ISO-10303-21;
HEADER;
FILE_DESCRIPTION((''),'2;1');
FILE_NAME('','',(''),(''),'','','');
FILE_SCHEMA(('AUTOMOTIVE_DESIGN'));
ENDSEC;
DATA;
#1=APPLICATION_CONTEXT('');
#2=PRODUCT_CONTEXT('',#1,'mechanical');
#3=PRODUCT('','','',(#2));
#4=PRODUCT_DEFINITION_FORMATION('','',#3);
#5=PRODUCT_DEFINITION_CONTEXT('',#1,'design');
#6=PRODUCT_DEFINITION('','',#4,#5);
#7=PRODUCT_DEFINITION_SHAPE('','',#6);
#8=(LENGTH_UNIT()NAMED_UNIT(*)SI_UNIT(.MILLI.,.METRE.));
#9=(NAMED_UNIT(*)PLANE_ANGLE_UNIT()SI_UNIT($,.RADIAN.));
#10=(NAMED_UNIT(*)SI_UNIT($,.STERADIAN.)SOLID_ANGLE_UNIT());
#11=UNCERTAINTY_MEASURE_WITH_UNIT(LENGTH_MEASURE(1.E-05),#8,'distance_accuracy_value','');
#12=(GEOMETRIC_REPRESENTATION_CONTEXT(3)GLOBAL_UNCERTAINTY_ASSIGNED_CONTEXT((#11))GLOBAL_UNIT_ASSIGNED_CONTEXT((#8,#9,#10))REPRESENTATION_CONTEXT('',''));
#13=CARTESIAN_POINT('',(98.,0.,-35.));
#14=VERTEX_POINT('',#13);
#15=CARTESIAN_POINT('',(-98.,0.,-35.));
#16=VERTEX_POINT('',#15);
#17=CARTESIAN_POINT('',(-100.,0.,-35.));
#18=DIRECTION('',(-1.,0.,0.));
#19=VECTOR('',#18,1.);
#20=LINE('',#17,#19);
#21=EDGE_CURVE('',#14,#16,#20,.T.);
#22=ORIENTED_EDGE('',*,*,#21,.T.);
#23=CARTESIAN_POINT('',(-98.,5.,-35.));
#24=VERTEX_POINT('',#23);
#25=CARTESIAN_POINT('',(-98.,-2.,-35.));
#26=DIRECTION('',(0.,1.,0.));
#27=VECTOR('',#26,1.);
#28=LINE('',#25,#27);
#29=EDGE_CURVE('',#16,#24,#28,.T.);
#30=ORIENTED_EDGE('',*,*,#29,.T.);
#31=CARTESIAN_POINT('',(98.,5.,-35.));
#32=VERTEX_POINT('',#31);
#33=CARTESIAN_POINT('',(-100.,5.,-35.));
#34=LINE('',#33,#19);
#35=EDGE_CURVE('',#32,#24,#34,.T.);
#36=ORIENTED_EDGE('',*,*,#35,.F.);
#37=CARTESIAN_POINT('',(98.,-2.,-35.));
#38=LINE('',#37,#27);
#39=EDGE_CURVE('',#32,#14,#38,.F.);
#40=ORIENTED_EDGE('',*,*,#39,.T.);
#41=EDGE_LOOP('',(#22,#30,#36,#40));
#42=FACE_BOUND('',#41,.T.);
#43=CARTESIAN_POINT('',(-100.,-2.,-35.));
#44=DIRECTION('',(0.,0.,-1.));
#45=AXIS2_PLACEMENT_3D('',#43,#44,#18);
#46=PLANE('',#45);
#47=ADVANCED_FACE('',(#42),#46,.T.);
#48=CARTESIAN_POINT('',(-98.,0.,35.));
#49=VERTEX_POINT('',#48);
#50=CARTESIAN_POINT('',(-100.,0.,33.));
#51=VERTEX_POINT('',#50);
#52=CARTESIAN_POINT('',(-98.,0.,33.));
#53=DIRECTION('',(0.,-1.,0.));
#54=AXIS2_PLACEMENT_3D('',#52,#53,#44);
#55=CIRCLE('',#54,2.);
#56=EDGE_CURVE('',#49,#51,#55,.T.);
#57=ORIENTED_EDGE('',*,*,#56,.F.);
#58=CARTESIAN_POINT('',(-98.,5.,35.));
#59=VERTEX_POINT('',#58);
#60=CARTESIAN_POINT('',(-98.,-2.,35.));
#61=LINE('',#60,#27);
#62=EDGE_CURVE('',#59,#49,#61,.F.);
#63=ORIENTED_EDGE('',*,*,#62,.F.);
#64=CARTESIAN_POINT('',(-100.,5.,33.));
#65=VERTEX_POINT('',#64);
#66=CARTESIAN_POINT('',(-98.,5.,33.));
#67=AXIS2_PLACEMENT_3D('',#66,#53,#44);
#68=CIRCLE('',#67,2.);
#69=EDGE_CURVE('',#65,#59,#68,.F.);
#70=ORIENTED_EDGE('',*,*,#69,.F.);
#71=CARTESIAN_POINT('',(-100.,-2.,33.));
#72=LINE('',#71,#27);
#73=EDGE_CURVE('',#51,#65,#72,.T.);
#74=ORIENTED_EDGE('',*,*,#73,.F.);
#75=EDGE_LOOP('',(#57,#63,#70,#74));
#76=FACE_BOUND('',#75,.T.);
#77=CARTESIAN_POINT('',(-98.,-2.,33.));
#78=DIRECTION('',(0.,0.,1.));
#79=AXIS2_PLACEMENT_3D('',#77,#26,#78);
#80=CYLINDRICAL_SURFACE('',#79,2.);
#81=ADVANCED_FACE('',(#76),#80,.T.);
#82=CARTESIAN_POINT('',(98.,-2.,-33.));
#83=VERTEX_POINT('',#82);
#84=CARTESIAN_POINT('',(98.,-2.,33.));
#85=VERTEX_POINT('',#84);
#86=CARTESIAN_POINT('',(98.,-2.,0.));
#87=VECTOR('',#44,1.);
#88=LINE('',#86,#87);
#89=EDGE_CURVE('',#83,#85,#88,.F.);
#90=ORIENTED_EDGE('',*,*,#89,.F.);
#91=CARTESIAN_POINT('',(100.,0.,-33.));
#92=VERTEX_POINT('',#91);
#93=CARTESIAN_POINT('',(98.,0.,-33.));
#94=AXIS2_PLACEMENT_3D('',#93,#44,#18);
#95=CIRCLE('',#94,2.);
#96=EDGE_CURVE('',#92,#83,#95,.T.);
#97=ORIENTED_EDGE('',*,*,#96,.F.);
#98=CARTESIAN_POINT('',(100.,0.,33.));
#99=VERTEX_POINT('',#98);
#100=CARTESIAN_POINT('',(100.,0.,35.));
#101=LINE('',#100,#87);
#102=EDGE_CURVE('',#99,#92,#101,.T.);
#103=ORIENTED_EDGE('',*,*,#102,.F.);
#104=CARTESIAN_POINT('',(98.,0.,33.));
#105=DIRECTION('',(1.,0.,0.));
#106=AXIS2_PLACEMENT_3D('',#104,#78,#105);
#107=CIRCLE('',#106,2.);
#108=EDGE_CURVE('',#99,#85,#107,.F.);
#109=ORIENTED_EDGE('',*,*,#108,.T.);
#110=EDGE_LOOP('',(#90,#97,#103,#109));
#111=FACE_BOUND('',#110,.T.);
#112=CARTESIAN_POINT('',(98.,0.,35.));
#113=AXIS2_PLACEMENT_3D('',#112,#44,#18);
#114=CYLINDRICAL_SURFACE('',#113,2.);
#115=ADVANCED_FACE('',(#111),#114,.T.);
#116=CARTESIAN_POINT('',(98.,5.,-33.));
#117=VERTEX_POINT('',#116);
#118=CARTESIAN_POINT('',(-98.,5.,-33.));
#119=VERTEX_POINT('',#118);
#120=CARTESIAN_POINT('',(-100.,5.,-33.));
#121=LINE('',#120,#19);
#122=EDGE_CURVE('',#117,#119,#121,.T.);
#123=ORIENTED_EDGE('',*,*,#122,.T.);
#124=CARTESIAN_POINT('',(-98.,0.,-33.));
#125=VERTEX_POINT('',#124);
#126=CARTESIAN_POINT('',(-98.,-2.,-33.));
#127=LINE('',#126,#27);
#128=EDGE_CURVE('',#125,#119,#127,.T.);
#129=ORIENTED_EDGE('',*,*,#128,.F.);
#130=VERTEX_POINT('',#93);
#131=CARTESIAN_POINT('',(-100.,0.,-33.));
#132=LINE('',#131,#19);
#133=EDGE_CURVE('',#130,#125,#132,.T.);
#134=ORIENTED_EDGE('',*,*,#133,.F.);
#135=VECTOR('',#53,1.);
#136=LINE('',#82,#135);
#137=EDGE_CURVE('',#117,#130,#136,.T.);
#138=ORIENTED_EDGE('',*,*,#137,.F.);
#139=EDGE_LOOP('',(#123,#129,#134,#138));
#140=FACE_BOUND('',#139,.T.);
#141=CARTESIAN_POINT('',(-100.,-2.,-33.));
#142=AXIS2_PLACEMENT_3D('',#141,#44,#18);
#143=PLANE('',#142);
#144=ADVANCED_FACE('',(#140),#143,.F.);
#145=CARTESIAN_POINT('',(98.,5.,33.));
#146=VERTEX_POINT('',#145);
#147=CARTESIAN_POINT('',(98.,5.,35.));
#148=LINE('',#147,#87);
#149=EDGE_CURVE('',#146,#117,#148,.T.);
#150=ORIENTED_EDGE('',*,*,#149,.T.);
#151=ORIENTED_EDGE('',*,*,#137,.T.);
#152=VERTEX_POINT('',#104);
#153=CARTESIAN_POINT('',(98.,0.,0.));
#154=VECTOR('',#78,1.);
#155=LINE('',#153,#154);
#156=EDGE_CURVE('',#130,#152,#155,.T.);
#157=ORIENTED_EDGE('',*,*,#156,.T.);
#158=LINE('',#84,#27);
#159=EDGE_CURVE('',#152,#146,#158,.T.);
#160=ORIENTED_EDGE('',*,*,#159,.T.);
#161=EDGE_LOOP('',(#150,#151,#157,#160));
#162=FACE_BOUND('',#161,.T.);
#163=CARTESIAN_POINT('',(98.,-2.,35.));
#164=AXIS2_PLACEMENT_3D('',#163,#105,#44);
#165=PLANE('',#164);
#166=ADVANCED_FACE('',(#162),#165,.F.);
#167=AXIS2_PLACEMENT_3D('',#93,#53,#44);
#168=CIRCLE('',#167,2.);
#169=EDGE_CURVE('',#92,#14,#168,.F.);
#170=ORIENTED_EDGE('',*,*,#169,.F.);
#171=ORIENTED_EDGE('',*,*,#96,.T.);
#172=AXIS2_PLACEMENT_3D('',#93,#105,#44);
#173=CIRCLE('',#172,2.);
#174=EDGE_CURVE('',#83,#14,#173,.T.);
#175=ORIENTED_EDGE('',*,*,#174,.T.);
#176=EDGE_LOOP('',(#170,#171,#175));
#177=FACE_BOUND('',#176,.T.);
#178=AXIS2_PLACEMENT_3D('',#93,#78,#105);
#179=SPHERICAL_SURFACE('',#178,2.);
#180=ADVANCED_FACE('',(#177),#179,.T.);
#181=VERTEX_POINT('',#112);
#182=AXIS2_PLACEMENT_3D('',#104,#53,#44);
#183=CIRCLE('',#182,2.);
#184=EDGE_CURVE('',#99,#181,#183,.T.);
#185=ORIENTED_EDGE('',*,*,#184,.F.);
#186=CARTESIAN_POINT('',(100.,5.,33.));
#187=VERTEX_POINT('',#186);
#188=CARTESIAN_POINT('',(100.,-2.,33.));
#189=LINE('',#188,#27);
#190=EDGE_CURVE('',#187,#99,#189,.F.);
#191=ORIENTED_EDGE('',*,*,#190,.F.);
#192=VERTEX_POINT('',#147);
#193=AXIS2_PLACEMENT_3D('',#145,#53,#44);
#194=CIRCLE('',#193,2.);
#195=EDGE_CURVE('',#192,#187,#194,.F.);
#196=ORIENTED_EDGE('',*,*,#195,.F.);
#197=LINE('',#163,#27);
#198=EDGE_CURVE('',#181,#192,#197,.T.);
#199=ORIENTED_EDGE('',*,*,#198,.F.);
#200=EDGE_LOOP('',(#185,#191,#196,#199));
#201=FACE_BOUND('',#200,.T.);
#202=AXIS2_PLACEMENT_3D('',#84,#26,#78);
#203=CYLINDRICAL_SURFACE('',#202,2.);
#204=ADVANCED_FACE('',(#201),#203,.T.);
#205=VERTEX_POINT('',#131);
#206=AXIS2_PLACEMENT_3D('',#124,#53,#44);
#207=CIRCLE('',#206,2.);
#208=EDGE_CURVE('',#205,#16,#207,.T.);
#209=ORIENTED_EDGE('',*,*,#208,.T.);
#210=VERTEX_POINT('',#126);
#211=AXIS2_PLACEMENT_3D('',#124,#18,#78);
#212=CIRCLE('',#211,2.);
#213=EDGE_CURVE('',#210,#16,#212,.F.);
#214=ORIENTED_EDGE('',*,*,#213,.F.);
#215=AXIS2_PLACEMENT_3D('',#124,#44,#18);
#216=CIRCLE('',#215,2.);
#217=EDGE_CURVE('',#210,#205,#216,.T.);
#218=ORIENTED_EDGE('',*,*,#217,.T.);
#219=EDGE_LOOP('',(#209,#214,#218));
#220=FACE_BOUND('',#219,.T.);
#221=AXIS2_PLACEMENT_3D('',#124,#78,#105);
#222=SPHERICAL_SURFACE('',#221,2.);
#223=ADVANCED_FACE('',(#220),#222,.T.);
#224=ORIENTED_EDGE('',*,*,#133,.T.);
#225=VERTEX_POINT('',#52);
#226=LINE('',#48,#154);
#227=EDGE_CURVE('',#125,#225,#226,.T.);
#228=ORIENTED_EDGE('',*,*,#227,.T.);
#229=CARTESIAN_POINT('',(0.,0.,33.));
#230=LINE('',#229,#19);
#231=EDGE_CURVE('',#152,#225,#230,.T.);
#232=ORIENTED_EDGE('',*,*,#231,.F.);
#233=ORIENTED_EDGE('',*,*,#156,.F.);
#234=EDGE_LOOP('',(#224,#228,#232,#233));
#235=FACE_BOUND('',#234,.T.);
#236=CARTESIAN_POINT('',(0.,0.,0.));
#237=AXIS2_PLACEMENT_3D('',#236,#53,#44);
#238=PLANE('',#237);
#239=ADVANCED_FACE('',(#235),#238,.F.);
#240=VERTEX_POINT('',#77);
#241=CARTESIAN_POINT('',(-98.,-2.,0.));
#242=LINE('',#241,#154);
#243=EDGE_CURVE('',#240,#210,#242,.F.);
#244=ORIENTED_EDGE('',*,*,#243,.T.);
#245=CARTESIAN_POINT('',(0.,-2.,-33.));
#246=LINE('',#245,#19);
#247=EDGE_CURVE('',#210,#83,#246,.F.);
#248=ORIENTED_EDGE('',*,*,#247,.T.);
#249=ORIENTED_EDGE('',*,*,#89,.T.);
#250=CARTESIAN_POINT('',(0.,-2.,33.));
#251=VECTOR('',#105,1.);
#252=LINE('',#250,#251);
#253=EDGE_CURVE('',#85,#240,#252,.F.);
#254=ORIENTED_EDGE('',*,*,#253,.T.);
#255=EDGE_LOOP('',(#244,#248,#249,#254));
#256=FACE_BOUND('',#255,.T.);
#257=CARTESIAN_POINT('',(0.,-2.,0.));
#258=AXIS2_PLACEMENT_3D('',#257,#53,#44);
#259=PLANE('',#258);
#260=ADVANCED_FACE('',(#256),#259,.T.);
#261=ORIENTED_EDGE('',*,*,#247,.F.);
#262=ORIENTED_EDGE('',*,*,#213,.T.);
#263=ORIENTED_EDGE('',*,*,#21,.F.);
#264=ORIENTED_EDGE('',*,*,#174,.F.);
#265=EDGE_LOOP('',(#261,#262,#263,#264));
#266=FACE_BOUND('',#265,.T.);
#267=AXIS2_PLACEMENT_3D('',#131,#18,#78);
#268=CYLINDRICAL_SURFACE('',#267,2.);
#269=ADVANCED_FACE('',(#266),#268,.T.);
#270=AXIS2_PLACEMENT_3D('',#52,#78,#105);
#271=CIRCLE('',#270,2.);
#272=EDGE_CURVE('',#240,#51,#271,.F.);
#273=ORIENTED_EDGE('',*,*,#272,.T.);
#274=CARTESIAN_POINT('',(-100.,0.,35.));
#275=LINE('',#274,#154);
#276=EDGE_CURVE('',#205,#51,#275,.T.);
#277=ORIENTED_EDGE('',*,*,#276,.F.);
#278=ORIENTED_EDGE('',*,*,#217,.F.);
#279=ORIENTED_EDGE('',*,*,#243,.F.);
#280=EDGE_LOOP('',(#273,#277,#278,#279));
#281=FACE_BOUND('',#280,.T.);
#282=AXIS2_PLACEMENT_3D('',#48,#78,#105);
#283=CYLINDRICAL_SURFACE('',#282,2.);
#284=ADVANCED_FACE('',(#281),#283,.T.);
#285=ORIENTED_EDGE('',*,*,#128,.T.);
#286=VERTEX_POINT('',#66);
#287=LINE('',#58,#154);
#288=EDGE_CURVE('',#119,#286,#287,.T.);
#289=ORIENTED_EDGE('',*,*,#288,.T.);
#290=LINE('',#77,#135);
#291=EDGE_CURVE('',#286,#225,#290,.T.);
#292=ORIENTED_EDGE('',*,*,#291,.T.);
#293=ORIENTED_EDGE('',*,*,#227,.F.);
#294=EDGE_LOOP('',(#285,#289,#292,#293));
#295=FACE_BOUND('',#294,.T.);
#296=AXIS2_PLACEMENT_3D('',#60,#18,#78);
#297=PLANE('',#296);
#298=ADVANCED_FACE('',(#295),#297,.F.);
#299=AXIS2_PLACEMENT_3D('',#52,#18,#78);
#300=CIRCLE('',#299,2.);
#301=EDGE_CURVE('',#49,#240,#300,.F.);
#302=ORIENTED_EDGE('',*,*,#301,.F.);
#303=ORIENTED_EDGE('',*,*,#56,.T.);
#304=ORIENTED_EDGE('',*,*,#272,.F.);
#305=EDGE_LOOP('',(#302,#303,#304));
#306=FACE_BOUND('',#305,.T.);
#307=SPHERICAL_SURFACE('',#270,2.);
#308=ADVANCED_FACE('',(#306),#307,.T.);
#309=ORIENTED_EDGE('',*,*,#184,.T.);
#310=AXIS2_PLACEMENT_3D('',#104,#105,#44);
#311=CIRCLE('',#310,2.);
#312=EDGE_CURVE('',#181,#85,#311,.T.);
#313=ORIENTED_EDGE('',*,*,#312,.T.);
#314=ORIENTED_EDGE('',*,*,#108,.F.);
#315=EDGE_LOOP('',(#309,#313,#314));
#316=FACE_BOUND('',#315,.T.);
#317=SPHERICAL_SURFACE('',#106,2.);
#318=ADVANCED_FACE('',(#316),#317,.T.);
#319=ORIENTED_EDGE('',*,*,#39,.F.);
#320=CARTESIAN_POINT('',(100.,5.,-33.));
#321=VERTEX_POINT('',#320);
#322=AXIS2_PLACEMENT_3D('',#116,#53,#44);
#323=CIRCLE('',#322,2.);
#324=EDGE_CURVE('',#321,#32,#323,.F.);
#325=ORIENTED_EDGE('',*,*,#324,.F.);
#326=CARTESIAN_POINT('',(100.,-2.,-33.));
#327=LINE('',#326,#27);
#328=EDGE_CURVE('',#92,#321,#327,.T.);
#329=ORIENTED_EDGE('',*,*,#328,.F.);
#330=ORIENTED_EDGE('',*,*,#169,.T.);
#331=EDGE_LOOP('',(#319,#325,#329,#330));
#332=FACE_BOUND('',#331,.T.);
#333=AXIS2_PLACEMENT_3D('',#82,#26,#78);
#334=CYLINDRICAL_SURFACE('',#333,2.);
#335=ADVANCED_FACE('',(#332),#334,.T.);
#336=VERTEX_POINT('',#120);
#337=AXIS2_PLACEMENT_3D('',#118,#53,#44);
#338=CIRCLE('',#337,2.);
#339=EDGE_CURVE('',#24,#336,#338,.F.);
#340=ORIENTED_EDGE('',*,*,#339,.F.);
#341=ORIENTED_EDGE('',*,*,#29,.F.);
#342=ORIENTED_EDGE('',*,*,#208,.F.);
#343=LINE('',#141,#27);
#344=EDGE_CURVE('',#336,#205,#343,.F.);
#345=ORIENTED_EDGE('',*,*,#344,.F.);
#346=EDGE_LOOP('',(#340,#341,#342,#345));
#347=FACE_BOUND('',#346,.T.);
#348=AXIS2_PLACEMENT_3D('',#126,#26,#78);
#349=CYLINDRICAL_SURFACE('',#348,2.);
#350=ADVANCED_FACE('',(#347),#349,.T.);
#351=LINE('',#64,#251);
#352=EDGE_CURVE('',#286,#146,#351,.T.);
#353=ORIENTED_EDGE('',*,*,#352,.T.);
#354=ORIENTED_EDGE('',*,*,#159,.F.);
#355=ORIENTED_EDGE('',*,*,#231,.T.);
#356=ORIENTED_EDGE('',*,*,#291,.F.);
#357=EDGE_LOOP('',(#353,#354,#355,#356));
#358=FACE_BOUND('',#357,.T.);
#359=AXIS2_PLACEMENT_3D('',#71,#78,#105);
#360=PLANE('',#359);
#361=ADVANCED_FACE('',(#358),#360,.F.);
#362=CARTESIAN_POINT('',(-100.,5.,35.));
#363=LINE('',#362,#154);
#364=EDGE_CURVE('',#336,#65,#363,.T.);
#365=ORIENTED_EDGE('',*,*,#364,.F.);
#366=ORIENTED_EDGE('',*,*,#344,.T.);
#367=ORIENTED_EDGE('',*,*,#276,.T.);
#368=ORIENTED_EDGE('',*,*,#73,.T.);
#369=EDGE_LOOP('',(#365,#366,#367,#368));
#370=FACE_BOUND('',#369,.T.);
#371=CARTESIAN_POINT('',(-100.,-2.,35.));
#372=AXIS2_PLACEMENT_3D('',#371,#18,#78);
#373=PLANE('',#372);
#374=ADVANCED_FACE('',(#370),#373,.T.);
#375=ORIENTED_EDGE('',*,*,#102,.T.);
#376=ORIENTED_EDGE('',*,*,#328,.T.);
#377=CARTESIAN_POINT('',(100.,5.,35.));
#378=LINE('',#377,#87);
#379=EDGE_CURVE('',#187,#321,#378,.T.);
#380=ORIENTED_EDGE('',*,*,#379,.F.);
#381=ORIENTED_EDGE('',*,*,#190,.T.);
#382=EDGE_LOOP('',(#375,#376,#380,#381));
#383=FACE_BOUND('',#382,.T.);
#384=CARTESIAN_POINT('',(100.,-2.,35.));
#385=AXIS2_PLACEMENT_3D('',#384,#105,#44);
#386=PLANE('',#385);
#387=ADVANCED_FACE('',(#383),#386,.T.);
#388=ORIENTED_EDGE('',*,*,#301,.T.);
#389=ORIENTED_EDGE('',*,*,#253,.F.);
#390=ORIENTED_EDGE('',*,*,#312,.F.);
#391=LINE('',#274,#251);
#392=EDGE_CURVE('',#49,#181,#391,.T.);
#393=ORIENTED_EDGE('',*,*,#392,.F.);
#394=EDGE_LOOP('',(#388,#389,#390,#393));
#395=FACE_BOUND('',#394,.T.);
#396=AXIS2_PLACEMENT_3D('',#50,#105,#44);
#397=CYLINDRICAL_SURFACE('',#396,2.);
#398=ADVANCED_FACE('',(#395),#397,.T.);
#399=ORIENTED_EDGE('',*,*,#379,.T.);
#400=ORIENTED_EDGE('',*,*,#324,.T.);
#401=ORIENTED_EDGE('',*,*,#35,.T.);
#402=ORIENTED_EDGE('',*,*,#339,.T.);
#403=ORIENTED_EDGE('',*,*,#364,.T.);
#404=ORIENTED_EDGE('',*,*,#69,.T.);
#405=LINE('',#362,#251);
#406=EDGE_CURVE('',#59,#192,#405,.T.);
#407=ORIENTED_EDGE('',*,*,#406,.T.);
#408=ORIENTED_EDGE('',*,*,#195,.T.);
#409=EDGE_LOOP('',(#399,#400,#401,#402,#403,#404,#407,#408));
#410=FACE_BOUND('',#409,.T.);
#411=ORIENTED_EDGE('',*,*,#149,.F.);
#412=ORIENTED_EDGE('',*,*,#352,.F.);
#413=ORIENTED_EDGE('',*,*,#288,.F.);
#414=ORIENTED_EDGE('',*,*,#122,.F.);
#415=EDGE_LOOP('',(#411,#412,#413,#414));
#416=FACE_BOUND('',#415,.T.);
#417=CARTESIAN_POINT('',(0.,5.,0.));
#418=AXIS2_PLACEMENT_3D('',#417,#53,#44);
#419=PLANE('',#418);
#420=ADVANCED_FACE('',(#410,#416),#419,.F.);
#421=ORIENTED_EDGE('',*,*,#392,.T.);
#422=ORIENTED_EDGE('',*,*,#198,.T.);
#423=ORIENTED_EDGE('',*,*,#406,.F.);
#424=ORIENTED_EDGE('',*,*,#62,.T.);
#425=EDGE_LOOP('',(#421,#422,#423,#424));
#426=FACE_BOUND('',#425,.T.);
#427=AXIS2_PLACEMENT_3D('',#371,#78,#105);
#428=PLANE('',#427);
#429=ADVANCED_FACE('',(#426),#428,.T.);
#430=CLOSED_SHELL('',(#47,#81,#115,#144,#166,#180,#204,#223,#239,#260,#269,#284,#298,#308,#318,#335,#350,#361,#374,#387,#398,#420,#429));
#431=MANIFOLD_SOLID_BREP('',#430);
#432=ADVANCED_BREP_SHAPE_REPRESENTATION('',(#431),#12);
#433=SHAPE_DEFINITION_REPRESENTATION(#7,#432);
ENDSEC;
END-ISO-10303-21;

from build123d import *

# Parameters (mm, degrees)
RECTANGLEBOX_DEPTH      = 5
RECTANGLEBOX_DEPTH_BACK = 2
SKETCHREC_W             = 200
SKETCHREC_H             = 70
RECTANGLER_R            = 2
RECTANGLEC_START        = -98
RECTANGLEC_OUTLINE_W    = 5
RECTANGLEC_OUTLINE_H    = 66
RECTANGLEC_DEPTH        = 196


# Read off the part's stored shape, not the designer's step: RectangleC
with BuildPart() as part:
    # SketchRec → RectangleBox (new, two sides: drawn at the far end of the back side and taken through both)
    with BuildSketch(Plane(origin=(0, 0, 0), x_dir=(1, 0, 0), z_dir=(0, 1, 0)).offset(-RECTANGLEBOX_DEPTH_BACK)):
        Rectangle(SKETCHREC_W, SKETCHREC_H)
    extrude(amount=RECTANGLEBOX_DEPTH + RECTANGLEBOX_DEPTH_BACK)

    # RectangleR
    rectangler_edges = [part.edges().sort_by_distance(p)[0] for p in [
        (-100, -2, 0),
        (0, -2, 35),
        (100, -2, 0),
        (0, -2, -35),
        (100, 1.5, 35),
        (-100, 1.5, 35),
        (-100, 1.5, -35),
        (100, 1.5, -35),
    ]]
    fillet(rectangler_edges, radius=RECTANGLER_R)

    # RectangleC outline → RectangleC (cut)
    with BuildSketch(Plane.YZ.offset(RECTANGLEC_START)):
        with Locations((2.5, 0)):
            Rectangle(RECTANGLEC_OUTLINE_W, RECTANGLEC_OUTLINE_H)
    extrude(amount=RECTANGLEC_DEPTH, mode=Mode.SUBTRACT)


solid = part.part
